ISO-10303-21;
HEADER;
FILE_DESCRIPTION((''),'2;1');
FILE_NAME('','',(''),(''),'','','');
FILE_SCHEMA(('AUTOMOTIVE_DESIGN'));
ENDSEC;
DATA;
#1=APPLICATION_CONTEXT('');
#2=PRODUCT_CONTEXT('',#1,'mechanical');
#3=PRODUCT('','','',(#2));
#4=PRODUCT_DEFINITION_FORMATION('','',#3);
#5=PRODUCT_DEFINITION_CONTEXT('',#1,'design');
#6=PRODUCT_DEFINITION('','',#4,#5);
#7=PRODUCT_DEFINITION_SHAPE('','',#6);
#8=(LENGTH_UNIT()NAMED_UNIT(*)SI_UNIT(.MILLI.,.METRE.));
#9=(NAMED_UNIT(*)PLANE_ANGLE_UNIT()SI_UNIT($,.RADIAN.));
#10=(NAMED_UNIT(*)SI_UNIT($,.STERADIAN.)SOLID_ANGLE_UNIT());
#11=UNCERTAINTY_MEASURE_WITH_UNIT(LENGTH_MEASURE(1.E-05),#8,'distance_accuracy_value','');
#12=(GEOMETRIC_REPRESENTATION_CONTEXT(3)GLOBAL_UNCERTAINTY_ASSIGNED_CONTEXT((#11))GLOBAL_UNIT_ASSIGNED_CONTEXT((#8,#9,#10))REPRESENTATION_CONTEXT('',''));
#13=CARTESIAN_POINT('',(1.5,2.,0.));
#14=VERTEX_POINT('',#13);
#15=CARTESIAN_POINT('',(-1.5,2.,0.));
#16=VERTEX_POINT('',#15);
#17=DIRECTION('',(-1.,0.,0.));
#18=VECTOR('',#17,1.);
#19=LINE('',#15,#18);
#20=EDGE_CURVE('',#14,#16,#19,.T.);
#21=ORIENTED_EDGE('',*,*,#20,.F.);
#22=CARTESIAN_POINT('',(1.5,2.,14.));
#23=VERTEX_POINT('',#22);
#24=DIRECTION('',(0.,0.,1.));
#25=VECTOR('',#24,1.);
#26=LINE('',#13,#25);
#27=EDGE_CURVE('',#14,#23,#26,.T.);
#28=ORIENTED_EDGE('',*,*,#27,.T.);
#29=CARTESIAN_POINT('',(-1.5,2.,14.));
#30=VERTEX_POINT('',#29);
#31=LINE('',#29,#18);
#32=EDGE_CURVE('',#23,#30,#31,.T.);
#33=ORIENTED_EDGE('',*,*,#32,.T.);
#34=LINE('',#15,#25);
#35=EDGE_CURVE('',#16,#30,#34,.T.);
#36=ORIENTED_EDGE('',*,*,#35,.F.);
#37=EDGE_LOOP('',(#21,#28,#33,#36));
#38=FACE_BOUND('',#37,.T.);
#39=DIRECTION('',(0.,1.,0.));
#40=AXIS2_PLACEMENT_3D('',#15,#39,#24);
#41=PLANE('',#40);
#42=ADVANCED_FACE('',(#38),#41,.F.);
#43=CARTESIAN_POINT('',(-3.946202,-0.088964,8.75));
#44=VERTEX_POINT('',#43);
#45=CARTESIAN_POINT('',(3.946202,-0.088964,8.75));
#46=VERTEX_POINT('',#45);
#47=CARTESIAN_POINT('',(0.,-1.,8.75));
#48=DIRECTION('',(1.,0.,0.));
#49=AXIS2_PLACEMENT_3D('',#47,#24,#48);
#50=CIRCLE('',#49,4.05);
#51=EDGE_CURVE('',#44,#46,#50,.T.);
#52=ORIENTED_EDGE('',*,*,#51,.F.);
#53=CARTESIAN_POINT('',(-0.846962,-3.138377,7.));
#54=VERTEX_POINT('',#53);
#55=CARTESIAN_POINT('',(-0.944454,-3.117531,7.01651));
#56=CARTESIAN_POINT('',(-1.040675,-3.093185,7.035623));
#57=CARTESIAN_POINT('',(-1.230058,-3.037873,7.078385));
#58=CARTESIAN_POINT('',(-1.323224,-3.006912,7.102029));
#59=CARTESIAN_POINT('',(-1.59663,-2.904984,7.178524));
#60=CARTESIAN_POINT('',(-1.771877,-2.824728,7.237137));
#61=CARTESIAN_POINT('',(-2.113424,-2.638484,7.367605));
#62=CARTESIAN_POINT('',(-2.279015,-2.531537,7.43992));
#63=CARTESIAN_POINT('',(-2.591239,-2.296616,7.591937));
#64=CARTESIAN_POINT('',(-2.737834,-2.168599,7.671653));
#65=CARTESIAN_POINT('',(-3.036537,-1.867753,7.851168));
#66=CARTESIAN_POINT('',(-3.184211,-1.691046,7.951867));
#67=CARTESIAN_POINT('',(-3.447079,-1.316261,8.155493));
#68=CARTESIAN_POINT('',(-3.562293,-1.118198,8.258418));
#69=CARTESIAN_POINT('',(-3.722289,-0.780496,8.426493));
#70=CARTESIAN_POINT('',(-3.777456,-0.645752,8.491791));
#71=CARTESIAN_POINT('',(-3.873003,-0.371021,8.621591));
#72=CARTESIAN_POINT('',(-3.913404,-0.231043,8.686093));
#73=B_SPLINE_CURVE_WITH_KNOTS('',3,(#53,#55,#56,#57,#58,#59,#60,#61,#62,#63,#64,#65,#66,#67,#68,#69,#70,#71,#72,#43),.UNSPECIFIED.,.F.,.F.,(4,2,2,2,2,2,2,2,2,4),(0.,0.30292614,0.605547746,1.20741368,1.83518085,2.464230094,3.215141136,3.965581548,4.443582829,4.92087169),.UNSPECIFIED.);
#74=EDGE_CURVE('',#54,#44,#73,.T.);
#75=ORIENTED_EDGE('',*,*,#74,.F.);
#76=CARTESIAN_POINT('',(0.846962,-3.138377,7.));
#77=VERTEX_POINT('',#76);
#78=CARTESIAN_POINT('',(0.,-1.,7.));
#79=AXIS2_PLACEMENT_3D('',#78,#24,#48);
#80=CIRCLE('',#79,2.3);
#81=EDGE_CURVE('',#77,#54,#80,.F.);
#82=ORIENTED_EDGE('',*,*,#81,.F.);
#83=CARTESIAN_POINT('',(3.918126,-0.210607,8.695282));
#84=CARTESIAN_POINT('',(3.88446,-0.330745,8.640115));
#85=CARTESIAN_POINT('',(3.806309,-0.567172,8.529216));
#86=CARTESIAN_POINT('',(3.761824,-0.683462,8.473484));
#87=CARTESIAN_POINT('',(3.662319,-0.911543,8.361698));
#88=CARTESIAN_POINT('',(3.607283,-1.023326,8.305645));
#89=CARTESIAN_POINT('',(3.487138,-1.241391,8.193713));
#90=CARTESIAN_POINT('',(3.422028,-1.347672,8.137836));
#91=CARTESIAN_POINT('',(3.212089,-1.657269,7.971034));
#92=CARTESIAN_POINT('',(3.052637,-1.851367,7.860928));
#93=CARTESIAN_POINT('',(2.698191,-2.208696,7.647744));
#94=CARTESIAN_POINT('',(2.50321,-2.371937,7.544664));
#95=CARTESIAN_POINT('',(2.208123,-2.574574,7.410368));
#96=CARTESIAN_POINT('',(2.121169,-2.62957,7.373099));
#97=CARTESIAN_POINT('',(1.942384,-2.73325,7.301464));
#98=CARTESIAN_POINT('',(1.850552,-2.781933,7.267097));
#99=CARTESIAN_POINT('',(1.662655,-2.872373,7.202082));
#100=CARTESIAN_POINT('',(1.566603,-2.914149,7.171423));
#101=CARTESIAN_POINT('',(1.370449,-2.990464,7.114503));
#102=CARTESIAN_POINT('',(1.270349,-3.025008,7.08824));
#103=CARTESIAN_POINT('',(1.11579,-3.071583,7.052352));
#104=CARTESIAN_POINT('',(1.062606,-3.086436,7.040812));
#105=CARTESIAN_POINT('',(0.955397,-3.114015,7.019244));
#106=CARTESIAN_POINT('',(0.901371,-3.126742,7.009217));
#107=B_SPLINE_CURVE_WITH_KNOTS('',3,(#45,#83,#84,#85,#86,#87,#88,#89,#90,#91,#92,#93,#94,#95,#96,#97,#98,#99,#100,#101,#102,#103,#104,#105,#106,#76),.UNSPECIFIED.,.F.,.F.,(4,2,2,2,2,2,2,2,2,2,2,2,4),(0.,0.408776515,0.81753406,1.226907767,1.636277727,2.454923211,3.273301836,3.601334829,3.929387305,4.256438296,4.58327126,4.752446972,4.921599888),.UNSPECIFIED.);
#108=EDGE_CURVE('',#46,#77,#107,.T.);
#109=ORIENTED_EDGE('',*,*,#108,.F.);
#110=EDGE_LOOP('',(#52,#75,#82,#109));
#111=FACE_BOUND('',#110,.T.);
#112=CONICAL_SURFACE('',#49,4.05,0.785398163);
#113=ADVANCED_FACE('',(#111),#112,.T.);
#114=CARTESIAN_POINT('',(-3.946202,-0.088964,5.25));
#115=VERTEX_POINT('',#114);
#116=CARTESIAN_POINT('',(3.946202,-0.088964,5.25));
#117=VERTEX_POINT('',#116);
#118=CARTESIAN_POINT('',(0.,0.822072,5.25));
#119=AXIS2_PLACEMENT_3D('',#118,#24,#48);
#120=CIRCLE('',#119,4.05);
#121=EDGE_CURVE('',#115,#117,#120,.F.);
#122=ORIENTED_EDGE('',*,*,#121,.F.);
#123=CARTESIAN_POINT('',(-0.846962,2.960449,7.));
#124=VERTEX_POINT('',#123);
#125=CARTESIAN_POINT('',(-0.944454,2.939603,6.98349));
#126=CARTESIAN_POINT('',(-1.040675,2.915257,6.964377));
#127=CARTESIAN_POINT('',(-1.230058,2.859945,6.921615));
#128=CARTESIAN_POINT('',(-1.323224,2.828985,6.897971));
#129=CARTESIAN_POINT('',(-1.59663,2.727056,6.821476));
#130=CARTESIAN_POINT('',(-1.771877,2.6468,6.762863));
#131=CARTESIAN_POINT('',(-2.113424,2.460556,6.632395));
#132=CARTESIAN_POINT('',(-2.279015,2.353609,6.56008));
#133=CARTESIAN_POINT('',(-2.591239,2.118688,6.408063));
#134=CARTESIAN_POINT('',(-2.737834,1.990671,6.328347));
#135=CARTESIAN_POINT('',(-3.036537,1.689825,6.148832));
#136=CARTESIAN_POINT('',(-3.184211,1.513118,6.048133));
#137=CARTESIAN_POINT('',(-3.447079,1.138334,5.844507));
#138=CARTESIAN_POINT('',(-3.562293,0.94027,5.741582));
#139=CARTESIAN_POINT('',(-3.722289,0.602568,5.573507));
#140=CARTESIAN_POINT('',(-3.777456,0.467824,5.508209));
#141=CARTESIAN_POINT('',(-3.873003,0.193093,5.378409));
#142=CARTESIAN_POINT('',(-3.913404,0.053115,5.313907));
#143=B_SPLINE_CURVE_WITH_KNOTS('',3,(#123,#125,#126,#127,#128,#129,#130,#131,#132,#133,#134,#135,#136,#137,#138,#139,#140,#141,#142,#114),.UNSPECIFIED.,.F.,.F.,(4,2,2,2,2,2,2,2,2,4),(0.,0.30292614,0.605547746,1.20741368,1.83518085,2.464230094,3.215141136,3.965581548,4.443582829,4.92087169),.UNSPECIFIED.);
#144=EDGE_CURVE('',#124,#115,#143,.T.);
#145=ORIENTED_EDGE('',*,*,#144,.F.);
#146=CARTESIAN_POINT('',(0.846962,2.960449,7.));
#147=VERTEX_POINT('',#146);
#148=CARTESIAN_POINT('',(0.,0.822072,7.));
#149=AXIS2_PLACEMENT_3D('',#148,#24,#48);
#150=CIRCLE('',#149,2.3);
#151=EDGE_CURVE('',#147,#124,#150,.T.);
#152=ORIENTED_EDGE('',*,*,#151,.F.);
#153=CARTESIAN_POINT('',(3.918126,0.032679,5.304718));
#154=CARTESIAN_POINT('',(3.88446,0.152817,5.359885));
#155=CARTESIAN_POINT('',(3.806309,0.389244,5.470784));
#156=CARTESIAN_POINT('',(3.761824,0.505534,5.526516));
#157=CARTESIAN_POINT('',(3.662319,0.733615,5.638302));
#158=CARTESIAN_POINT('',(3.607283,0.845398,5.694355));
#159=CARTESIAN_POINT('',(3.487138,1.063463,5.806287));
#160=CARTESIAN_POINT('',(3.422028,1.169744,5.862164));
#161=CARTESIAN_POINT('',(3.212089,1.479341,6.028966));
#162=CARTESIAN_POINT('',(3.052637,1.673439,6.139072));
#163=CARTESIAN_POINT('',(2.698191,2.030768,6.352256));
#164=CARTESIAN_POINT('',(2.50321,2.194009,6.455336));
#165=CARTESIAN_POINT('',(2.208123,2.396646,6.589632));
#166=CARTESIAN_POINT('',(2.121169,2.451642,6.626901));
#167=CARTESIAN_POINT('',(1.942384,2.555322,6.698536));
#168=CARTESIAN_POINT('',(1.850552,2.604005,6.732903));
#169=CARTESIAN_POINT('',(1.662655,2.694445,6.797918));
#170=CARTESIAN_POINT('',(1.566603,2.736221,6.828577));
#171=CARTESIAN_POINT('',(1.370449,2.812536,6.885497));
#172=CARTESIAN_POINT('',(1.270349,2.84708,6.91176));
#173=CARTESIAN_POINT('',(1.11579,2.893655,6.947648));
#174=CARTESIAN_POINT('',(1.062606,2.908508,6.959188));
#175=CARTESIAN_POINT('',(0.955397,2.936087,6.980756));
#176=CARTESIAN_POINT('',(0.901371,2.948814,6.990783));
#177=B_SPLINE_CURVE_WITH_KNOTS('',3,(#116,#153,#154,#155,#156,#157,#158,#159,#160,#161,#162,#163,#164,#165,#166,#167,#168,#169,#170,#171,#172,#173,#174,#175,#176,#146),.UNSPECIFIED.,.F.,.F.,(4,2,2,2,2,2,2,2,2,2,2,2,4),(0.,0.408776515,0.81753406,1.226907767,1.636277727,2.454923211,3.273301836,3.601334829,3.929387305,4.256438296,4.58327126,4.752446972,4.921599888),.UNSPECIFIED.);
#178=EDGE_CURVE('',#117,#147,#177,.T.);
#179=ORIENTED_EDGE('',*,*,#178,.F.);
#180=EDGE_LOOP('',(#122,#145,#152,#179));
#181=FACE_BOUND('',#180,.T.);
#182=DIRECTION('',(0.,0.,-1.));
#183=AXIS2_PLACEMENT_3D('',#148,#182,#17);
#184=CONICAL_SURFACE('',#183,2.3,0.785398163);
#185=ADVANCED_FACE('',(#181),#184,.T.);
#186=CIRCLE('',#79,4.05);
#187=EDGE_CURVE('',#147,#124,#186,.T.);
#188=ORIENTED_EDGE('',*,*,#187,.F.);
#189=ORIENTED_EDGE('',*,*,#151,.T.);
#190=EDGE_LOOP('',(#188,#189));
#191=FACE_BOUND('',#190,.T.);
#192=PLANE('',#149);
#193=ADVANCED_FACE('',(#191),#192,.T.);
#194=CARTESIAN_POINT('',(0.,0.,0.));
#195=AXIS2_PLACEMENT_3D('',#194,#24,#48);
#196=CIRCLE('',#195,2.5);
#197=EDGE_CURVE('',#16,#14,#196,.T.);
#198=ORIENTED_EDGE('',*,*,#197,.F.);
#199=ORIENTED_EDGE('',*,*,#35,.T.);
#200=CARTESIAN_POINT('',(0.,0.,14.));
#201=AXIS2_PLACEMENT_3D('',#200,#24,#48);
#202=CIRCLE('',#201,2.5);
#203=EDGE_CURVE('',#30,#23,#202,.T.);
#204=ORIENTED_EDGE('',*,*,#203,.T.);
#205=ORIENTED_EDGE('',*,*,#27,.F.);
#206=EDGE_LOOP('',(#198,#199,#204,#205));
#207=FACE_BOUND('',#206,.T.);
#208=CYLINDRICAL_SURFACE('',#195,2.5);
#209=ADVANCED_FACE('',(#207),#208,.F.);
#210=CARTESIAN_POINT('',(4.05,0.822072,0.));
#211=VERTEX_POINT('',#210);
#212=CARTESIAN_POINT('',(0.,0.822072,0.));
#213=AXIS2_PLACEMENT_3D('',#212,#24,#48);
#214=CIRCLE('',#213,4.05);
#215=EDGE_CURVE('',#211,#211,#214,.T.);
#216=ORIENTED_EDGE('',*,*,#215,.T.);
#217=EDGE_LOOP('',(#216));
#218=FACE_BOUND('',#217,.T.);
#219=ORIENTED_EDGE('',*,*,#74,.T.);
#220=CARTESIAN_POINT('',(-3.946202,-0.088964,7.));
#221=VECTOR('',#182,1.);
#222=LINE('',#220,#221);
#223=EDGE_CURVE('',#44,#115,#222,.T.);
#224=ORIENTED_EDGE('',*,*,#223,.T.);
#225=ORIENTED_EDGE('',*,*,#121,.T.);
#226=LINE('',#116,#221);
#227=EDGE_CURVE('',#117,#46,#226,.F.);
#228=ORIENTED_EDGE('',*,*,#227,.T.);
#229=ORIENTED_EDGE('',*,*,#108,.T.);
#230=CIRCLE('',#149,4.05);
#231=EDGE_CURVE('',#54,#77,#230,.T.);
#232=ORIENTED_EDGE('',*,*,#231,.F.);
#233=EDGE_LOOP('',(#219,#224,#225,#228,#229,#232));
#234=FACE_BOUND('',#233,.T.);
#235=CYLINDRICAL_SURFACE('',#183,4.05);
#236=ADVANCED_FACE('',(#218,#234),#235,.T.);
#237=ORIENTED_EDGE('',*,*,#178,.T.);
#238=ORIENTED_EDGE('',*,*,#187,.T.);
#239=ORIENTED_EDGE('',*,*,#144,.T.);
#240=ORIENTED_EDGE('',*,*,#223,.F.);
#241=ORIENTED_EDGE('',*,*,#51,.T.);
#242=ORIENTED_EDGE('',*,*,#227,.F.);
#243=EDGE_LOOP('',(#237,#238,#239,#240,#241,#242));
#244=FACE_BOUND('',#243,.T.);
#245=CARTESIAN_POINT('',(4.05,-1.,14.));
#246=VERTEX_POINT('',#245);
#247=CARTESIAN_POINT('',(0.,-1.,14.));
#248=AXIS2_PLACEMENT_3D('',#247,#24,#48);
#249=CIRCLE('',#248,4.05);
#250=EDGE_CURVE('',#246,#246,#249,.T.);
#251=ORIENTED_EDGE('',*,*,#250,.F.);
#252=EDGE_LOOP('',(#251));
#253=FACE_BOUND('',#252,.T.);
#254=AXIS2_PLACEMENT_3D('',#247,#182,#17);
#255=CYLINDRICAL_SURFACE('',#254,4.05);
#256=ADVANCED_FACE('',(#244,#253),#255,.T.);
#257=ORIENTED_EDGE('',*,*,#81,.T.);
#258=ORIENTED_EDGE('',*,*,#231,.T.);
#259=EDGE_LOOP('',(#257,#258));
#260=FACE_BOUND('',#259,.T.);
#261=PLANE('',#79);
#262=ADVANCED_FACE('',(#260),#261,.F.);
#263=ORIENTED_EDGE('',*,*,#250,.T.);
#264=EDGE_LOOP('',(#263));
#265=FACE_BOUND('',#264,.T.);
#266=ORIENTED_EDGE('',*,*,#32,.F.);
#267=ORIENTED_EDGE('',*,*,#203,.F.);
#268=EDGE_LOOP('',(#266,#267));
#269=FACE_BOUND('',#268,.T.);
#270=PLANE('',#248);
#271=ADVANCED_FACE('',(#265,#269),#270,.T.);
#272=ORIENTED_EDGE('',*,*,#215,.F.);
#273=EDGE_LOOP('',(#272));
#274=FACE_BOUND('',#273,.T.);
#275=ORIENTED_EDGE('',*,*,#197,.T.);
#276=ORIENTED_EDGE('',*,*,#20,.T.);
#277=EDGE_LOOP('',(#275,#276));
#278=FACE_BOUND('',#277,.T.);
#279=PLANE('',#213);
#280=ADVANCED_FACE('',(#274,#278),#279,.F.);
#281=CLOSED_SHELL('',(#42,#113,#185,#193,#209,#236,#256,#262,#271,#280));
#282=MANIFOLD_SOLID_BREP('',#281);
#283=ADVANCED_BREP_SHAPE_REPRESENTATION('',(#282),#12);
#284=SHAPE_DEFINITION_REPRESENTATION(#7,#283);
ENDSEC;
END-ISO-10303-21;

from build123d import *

# Parameters (mm, degrees)
ESQUISSE1_R             = 4.05
BOSS_EXTRU_1_DEPTH      = 7
ESQUISSE2_R             = 4.05
BOSS_EXTRU_2_DEPTH      = 7
ENL_V_MAT_EXTRU_1_DEPTH = 16.424169346
CHANFREIN2_SIZE         = 1.75
CHANFREIN4_SIZE         = 1.75


with BuildPart() as part:
    # Esquisse1 → Boss.-Extru.1 (new body)
    with BuildSketch(Plane.XY):
        with Locations((0, 0.822072072)):
            Circle(ESQUISSE1_R)
    extrude(amount=BOSS_EXTRU_1_DEPTH)

    # Esquisse2 → Boss.-Extru.2 (add)
    with BuildSketch(Plane.XY.offset(7)):
        with Locations(Location((0, -1, 0), (0, 0, 167.000228446))):
            Circle(ESQUISSE2_R)
    extrude(amount=BOSS_EXTRU_2_DEPTH)

    # Esquisse3 → Enlèv. mat.-Extru.1 (cut, through all)
    with BuildSketch(Plane.XY.offset(14)):
        with BuildLine():
            Line((-1.5, 2), (1.5, 2))
            ThreePointArc((1.5, 2), (0, -2.5), (-1.5, 2))
        make_face()
    extrude(amount=-ENL_V_MAT_EXTRU_1_DEPTH, mode=Mode.SUBTRACT)

    # Chanfrein2
    # the kernel refuses this chamfer: 1.75 mm, written as the material it takes off along each edge
    with BuildSketch(Plane(origin=(0, 0.822072072, 7), x_dir=(1, 0, 0), z_dir=(0, -1, 0))) as chanfrein2_piece_1_section:
        Polygon((4.05, -CHANFREIN2_SIZE), (4.05 - CHANFREIN2_SIZE, 0), (4.05, 0), align=None)
    chanfrein2_piece_1 = revolve(axis=Axis((0, 0.822072072, 7), (0, 0, 1)), revolution_arc=256.785781501, mode=Mode.PRIVATE)
    chanfrein2_piece_1 = chanfrein2_piece_1 - Plane(origin=(0, -1, 6.142651894), x_dir=(-0.9743709616876816, 0.22494716939722223, 0), z_dir=(0, 0, -1)) * Cylinder(4.05, 17, mode=Mode.PRIVATE)
    add(chanfrein2_piece_1, mode=Mode.SUBTRACT)
    with BuildSketch(Plane(origin=(0, 0.822072072, 7), x_dir=(0.23058336065371998, -0.9730525750387985, 0), z_dir=(-0.9730525750387985, -0.23058336065371998, 0))) as chanfrein2_piece_2_section:
        Polygon((4.05, -CHANFREIN2_SIZE), (4.05 - CHANFREIN2_SIZE, 0), (4.05, 0), align=None)
    chanfrein2_piece_2 = revolve(axis=Axis((0, 0.822072072, 7), (0, 0, 1)), revolution_arc=76.66858095, mode=Mode.PRIVATE)
    chanfrein2_piece_2 = chanfrein2_piece_2 - Plane(origin=(0, -1, 6.19314211), x_dir=(-0.9743709616876816, 0.22494716939722223, 0), z_dir=(0, 0, -1)) * Cylinder(4.05, 17, mode=Mode.PRIVATE)
    add(chanfrein2_piece_2, mode=Mode.SUBTRACT)

    # Chanfrein4
    # the kernel refuses this chamfer: 1.75 mm, written as the material it takes off along each edge
    with BuildSketch(Plane(origin=(0, -1, 7), x_dir=(-0.22831348546058428, 0.9735876706064225, 0), z_dir=(0.9735876706064225, 0.22831348546058428, 0))) as chanfrein4_piece_1_section:
        Polygon((4.05 - CHANFREIN4_SIZE, 0), (4.05, CHANFREIN4_SIZE), (4.05, 0), align=None)
    chanfrein4_piece_1 = revolve(axis=Axis((0, -1, 7), (0, 0, 1)), revolution_arc=333.604400204, mode=Mode.PRIVATE)
    chanfrein4_piece_1 = chanfrein4_piece_1 - Plane(origin=(0, 0.822072072, 7.857230716), x_dir=(1, 0, 0), z_dir=(0, 0, -1)) * Cylinder(4.05, 17, mode=Mode.PRIVATE)
    add(chanfrein4_piece_1, mode=Mode.SUBTRACT)


solid = part.part
